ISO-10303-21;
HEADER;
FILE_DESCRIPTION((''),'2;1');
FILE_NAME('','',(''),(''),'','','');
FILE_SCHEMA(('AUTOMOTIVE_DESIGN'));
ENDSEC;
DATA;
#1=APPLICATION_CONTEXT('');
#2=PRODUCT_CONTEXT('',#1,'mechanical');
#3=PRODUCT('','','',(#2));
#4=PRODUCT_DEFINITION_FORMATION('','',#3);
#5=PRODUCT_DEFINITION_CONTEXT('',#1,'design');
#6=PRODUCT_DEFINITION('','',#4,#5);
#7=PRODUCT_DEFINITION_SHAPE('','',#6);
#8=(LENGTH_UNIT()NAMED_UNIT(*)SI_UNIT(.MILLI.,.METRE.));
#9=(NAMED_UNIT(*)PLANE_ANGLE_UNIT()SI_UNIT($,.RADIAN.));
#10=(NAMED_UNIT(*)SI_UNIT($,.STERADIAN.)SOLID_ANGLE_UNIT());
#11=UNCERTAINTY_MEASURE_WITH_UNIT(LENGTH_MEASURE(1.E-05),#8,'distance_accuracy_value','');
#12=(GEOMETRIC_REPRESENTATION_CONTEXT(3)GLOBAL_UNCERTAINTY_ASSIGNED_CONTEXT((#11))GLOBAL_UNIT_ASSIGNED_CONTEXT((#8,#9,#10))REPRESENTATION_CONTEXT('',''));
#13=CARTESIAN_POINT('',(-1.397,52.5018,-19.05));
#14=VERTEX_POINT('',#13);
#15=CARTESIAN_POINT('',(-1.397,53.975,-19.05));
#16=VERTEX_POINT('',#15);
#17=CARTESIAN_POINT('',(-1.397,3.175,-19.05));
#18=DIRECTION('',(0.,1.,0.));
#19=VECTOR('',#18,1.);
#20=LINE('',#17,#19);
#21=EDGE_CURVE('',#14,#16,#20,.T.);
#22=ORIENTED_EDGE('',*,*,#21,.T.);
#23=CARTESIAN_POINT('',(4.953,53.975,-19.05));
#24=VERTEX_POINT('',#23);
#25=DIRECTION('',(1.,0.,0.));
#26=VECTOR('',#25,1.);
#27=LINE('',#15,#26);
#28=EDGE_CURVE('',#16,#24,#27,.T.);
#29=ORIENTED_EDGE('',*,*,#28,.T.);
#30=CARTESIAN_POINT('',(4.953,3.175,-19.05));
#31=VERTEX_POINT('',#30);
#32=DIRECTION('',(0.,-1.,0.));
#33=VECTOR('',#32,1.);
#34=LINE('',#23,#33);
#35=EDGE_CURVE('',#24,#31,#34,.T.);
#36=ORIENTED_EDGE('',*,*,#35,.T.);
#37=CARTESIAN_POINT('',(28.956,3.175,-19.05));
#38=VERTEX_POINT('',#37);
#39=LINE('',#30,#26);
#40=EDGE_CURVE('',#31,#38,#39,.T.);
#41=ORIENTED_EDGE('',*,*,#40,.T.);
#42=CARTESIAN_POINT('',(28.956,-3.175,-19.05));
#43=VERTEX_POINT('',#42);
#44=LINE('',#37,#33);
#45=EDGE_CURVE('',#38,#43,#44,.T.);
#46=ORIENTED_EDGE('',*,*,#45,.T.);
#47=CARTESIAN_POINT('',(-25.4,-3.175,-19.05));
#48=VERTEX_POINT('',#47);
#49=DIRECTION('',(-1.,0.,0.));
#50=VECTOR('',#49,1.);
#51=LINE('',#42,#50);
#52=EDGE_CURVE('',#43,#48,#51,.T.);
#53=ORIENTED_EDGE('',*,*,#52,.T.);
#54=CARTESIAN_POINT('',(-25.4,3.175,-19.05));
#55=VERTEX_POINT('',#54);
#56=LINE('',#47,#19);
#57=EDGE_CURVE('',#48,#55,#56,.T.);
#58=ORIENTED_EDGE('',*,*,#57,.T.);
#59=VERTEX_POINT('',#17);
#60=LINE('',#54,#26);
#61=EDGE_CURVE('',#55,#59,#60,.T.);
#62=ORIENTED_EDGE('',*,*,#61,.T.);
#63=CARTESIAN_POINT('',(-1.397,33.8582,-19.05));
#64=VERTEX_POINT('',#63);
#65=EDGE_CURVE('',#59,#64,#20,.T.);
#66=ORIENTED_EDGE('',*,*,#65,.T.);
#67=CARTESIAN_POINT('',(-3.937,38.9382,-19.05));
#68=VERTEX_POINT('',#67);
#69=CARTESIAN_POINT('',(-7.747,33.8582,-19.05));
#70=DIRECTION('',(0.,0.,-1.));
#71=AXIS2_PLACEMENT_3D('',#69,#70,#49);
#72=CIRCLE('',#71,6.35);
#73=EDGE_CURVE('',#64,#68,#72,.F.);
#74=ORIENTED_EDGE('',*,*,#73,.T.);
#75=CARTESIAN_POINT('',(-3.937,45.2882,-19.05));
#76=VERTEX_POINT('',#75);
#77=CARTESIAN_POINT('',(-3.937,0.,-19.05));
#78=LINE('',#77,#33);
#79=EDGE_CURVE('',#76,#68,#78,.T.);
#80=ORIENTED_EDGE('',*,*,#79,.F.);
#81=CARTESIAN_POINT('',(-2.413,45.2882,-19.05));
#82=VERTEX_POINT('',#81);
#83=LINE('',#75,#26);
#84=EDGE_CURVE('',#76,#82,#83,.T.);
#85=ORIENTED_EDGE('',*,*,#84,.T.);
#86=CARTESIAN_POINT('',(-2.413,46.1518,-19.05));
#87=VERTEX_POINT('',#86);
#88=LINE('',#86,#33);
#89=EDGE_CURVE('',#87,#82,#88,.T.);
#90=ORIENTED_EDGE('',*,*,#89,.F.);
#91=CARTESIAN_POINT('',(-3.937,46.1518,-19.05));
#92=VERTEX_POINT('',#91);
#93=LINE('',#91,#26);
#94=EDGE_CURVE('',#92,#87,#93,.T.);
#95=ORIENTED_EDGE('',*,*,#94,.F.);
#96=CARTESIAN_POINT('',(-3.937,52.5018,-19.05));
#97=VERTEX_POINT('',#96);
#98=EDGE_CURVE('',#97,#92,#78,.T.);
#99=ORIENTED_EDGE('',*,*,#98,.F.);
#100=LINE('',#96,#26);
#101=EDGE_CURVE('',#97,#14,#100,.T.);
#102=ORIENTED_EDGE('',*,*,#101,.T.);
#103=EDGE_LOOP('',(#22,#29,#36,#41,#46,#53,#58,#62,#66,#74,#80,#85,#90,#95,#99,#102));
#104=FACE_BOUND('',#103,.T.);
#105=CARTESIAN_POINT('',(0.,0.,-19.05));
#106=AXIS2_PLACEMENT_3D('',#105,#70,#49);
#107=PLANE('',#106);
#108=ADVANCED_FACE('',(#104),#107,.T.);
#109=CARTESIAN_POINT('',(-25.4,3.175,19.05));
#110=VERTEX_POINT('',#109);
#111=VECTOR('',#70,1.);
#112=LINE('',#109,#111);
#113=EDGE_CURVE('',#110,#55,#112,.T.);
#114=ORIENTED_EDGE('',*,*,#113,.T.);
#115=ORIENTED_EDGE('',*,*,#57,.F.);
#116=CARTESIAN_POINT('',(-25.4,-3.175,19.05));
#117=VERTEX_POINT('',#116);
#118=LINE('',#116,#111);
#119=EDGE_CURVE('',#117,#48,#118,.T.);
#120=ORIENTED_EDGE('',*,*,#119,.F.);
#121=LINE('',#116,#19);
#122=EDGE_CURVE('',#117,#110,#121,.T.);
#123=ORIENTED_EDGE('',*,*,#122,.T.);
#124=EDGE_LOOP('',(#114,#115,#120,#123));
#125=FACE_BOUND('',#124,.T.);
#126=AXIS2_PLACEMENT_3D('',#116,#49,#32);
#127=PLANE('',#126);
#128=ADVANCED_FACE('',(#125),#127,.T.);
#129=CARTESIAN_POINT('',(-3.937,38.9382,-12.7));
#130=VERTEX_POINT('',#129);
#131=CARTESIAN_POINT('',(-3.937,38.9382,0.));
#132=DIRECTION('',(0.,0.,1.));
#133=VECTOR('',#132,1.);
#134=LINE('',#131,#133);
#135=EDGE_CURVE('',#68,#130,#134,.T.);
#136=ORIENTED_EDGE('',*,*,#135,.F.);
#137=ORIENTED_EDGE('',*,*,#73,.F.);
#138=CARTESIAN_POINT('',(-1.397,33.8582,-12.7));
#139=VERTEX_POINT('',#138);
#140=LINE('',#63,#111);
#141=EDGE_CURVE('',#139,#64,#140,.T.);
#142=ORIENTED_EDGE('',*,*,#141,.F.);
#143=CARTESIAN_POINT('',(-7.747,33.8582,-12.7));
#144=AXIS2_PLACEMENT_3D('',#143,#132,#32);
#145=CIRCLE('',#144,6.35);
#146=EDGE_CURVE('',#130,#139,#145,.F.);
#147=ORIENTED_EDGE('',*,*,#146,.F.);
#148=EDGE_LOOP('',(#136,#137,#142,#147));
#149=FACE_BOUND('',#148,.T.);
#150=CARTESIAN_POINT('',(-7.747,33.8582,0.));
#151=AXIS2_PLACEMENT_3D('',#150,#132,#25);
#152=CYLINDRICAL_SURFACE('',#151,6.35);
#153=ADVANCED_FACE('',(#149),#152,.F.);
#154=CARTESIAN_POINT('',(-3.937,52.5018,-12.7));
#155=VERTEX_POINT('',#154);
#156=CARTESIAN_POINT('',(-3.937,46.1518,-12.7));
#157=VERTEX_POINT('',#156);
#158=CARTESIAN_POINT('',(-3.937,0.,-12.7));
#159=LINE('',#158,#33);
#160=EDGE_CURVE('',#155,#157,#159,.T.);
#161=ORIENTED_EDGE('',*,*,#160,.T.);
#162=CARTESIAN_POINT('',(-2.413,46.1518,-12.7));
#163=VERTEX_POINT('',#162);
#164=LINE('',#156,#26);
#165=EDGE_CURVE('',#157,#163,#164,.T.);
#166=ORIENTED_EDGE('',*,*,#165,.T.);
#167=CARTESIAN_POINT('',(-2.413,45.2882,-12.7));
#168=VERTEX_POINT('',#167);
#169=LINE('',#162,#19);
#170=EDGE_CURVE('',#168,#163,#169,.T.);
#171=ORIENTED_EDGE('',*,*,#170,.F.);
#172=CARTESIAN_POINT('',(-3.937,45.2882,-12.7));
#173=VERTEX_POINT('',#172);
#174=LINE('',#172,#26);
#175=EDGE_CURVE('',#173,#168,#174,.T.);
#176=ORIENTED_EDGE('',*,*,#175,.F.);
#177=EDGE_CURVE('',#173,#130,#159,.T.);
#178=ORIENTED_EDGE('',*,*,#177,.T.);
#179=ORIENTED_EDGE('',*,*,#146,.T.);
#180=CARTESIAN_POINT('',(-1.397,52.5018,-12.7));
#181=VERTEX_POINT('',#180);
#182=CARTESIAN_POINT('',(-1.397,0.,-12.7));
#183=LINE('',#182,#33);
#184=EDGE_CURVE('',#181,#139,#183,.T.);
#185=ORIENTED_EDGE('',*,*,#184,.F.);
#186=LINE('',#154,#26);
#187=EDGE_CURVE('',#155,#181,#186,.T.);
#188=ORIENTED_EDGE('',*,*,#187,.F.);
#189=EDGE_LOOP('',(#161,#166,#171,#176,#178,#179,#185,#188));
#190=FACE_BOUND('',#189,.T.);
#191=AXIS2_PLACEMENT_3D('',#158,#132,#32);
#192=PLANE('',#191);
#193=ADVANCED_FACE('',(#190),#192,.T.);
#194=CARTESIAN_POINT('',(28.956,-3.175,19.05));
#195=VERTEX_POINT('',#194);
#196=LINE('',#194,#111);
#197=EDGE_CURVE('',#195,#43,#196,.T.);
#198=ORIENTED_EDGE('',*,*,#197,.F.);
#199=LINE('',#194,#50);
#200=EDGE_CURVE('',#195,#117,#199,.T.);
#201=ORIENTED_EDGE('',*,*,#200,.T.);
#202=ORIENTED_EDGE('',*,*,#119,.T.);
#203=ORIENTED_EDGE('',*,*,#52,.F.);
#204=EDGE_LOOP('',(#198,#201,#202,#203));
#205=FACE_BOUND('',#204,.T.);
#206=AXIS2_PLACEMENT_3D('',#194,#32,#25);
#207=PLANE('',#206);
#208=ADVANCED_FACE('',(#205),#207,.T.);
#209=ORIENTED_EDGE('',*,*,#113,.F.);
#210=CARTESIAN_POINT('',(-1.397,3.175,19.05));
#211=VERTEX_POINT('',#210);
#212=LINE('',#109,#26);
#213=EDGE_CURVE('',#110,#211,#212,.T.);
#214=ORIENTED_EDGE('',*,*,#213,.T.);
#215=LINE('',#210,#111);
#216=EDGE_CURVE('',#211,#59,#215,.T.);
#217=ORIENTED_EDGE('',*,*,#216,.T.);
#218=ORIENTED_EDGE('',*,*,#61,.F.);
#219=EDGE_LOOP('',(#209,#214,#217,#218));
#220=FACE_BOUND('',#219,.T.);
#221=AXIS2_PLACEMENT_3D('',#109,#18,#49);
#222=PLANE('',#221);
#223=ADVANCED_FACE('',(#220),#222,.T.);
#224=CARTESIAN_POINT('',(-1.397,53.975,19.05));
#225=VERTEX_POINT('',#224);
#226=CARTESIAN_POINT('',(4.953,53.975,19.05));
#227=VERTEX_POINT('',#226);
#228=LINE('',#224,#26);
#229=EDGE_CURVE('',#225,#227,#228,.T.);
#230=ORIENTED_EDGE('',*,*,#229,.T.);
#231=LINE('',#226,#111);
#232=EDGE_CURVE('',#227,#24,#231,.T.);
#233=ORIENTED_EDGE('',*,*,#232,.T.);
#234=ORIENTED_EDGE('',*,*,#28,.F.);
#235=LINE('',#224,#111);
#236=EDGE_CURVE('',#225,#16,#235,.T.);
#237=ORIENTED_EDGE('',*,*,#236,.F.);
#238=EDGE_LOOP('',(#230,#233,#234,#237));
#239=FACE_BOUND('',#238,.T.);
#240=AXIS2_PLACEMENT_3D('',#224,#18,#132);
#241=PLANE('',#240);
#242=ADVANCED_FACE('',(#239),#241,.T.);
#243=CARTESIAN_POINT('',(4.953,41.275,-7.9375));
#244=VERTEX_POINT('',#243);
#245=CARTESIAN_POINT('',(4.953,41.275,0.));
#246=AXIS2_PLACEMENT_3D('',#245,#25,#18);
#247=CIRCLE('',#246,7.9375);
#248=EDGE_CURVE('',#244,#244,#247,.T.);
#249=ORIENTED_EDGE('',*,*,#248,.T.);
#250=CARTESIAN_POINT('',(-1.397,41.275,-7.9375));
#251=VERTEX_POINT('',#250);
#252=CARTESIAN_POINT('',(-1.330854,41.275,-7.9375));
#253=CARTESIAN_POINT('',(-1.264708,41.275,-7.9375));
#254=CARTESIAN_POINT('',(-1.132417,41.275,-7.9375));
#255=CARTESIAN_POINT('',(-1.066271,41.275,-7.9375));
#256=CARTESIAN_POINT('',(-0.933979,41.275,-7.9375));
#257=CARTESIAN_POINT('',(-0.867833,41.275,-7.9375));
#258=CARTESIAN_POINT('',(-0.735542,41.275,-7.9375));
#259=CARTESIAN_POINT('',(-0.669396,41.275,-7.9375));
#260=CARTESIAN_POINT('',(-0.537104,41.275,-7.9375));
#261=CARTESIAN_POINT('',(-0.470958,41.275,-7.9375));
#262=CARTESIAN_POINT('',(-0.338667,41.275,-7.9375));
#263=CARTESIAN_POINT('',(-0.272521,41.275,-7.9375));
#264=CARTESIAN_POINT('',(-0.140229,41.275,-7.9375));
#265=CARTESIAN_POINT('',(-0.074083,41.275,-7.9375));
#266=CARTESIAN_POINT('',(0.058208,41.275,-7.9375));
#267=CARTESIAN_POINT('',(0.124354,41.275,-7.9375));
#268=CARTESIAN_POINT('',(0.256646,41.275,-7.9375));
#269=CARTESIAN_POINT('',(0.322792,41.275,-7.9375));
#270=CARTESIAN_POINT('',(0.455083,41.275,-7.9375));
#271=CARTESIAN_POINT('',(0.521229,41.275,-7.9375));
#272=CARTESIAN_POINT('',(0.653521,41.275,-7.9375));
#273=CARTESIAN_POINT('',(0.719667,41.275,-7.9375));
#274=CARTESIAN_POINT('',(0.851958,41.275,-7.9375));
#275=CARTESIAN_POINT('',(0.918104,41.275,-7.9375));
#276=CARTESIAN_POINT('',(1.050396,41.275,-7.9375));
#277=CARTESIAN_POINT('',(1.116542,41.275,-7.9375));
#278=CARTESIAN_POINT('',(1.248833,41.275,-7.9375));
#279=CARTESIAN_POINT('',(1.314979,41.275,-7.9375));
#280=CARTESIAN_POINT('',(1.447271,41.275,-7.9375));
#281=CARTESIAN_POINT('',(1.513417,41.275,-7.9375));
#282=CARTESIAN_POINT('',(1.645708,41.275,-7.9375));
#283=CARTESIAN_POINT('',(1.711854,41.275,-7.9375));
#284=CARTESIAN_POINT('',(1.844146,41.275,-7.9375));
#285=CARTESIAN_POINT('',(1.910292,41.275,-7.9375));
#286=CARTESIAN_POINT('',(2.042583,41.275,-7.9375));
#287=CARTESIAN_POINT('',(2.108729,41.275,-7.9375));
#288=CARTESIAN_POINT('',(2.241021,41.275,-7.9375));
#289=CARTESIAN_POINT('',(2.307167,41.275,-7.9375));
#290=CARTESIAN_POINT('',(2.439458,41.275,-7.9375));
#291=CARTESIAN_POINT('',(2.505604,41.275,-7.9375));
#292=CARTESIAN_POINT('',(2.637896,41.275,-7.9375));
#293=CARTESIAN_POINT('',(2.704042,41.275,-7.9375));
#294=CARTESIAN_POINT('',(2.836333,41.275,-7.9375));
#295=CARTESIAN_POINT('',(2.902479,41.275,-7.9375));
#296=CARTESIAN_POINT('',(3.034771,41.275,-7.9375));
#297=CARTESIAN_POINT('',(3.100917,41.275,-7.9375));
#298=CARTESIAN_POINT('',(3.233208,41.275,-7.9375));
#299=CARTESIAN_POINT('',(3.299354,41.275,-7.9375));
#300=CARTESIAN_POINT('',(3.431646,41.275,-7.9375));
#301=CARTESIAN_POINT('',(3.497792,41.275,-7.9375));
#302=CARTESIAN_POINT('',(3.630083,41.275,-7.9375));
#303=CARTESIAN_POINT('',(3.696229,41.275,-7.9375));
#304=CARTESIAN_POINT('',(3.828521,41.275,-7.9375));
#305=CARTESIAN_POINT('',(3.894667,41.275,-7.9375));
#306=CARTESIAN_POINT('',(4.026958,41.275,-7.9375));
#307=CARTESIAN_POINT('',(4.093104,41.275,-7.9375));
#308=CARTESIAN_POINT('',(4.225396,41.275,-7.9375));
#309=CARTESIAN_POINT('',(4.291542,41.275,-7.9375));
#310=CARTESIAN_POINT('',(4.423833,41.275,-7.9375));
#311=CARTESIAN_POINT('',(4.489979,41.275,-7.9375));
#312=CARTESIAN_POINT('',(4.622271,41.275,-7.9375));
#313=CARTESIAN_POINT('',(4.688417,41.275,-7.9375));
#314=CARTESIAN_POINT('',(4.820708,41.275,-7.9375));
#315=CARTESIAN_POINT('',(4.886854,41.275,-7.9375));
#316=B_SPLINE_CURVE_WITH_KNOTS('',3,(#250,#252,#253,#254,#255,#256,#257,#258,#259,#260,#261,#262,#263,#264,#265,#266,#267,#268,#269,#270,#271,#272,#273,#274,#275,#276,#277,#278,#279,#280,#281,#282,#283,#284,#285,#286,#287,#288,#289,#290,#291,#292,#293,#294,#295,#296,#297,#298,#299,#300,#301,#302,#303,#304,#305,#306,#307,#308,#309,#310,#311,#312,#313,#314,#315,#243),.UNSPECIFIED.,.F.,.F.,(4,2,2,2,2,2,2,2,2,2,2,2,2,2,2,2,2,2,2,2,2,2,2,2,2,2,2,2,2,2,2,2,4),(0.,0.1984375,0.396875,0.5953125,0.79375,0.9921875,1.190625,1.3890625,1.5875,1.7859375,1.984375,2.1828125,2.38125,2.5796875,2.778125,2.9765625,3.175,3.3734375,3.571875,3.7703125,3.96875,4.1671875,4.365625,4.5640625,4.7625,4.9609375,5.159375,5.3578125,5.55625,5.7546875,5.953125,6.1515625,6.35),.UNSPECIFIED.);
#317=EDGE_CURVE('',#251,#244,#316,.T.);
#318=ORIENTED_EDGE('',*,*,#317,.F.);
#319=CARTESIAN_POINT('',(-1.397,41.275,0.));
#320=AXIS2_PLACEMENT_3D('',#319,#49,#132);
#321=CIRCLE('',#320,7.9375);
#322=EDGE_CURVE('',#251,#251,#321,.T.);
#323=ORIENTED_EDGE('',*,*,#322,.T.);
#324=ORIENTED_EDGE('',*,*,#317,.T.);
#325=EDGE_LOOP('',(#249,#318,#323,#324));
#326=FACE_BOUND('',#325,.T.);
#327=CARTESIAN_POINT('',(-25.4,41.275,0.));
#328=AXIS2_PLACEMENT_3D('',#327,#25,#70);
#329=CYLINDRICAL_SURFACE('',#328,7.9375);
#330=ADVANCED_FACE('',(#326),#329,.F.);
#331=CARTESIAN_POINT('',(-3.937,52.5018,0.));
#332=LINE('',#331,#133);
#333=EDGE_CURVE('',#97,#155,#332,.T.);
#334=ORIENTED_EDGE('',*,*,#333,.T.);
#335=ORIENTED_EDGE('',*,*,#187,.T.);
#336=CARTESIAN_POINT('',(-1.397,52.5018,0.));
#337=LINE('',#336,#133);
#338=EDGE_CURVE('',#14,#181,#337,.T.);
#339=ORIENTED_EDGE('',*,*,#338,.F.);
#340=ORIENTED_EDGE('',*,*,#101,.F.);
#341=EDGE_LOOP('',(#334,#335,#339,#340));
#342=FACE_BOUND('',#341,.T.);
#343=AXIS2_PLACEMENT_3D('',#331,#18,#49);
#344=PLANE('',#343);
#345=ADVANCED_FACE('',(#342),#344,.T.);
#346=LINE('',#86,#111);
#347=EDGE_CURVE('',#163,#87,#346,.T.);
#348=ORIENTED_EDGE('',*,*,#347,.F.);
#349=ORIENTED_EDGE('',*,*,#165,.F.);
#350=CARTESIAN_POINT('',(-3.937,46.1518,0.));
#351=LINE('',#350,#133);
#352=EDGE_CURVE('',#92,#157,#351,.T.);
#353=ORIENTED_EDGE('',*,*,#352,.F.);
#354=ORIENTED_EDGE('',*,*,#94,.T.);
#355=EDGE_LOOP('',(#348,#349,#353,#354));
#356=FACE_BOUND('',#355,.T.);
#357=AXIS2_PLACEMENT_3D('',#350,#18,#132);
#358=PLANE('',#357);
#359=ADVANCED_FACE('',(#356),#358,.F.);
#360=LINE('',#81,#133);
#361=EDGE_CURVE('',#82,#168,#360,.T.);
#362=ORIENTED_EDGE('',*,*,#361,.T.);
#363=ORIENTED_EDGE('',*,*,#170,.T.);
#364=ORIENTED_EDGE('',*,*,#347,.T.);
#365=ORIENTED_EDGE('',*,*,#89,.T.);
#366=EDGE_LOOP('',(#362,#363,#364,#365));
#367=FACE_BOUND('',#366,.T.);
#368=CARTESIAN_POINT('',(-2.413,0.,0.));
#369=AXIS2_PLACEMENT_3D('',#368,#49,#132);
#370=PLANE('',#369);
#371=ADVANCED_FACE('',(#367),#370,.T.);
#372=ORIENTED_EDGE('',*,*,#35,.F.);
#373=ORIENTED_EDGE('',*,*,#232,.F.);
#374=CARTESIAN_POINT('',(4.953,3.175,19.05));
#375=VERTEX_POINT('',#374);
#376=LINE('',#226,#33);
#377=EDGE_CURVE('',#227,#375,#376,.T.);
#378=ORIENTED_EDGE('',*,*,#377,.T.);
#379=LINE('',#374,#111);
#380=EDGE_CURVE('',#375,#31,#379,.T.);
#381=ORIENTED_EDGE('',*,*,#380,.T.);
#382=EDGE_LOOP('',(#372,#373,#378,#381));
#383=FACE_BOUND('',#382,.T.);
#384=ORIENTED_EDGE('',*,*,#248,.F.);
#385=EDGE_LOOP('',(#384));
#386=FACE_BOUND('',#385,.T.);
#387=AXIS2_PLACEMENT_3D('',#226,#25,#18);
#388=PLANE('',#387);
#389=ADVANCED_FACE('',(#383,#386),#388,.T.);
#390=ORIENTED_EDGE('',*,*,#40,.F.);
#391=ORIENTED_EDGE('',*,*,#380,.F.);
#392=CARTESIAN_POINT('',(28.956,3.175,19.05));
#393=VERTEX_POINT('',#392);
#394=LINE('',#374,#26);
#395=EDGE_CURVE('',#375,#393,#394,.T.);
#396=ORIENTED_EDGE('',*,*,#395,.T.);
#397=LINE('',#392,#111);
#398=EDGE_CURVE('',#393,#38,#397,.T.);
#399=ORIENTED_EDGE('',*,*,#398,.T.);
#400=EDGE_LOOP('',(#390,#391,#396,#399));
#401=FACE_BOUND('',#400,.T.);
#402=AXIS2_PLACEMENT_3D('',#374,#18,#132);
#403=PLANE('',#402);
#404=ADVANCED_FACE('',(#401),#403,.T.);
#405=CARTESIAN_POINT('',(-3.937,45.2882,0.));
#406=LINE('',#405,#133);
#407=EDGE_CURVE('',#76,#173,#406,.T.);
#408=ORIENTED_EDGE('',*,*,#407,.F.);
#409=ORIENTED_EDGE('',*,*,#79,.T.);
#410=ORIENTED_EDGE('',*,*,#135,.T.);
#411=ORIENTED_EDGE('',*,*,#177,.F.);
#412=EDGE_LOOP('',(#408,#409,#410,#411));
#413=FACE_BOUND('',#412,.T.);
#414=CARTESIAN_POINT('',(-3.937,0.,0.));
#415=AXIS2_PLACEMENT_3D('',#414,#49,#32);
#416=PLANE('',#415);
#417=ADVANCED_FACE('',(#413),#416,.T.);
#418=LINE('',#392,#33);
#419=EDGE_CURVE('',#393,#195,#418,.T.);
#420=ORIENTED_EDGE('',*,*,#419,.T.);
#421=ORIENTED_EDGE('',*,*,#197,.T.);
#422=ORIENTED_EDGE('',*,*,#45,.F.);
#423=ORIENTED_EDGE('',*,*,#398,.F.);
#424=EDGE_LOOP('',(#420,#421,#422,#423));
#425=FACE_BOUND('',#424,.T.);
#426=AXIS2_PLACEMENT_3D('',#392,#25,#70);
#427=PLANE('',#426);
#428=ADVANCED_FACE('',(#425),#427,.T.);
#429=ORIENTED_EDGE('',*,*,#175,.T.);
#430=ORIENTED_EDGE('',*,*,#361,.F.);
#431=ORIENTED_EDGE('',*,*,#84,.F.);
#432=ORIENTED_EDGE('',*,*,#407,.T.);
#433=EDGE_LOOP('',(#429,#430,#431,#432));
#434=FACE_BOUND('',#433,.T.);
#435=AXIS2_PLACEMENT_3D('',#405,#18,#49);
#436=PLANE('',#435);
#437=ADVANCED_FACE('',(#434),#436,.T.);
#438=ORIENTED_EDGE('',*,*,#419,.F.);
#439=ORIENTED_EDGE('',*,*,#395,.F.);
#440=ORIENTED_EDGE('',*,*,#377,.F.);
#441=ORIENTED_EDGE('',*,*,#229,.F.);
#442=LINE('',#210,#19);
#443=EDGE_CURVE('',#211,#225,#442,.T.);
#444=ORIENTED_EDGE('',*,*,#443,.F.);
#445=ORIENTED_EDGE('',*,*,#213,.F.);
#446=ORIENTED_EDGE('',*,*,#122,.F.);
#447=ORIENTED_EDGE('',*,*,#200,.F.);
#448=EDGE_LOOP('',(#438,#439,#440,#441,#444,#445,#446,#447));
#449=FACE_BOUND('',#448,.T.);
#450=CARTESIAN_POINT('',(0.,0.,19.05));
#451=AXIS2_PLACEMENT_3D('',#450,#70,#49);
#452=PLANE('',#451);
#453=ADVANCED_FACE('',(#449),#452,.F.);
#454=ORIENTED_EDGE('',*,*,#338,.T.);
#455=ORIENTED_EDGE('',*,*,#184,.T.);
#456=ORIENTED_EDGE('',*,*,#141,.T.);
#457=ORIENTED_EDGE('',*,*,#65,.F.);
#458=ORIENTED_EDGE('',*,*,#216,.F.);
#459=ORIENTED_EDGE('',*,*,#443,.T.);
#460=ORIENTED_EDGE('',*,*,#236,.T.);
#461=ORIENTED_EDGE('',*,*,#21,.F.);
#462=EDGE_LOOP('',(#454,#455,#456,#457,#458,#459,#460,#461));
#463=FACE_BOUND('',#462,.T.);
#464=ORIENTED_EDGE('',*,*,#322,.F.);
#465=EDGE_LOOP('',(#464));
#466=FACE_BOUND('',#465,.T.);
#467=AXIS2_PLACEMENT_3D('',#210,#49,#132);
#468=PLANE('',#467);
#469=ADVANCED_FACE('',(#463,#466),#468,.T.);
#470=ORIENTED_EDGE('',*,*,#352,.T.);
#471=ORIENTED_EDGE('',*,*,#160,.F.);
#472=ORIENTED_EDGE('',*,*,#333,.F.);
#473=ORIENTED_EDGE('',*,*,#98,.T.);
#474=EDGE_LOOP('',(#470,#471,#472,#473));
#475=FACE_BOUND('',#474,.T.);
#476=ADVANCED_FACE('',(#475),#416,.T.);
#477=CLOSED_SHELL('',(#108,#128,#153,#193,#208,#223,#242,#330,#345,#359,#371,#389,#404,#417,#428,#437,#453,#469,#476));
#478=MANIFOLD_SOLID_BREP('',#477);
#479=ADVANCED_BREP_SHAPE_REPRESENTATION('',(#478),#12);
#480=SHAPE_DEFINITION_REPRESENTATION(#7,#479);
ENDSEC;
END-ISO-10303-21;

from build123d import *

# Parameters (mm, degrees)
BOSS_EXTRUDE1_DEPTH     = 19.05
CUT_EXTRUDE1_DEPTH      = 65.788175881
CUT_EXTRUDE1_DEPTH_BACK = 65.788175881
SKETCH2_R               = 7.9375
SKETCH3_W               = 6.35
SKETCH3_H               = 6.35
BOSS_EXTRUDE2_DEPTH     = 2.54
FILLET1_R               = 6.35
SKETCH4_W               = 6.35
SKETCH4_H               = 0.8636
BOSS_EXTRUDE3_DEPTH     = 1.016


with BuildPart() as part:
    # Sketch1 → Boss-Extrude1 (new, symmetric)
    with BuildSketch(Plane.XY):
        Polygon((-1.397, 3.175), (-1.397, 53.975), (4.953, 53.975), (4.953, 3.175), (28.956, 3.175), (28.956, -3.175), (-25.4, -3.175), (-25.4, 3.175), align=None)
    extrude(amount=BOSS_EXTRUDE1_DEPTH, both=True)

    # Sketch2 → Cut-Extrude1 (cut, two sides: drawn at the far end of the back side and taken through both)
    with BuildSketch(Plane(origin=(4.953, 0, 0), x_dir=(0, 0, -1), z_dir=(1, 0, 0)).offset(-CUT_EXTRUDE1_DEPTH_BACK)):
        with Locations((0, 41.275)):
            Circle(SKETCH2_R)
    extrude(amount=CUT_EXTRUDE1_DEPTH + CUT_EXTRUDE1_DEPTH_BACK, mode=Mode.SUBTRACT)

    # Sketch3 → Boss-Extrude2 (add)
    with BuildSketch(Plane.ZY.offset(1.397)):
        with Locations((-15.875, 49.3268)):
            Rectangle(SKETCH3_W, SKETCH3_H)
        with Locations((-15.875, 42.1132)):
            Rectangle(SKETCH3_W, SKETCH3_H)
    extrude(amount=BOSS_EXTRUDE2_DEPTH)

    # Fillet1
    # the kernel refuses this fillet: 6.35 mm, written as the material it adds along each edge
    with BuildSketch(Plane(origin=(-1.397, 38.9382, -19.05), x_dir=(0, -1, 0), z_dir=(0, 0, 1))) as fillet1_piece_1:
        with BuildLine():
            CenterArc((5.08, -6.35), FILLET1_R, 90, 53.130102354)
            Line((0, -2.54), (-0.1016, -2.4638))
            ThreePointArc((-0.1016, -2.4638), (-0.127, -1.27), (-0.127, 0))
            Line((-0.127, 0), (0, 0.127))
            Line((0, 0.127), (5.08, 0.127))
            Line((5.08, 0.127), (5.08, 0))
        make_face()
    extrude(amount=6.35)

    # Sketch4 → Boss-Extrude3 (add)
    with BuildSketch(Plane.ZY.offset(1.397)):
        with Locations((-15.875, 45.72)):
            Rectangle(SKETCH4_W, SKETCH4_H)
    extrude(amount=BOSS_EXTRUDE3_DEPTH)


solid = part.part
